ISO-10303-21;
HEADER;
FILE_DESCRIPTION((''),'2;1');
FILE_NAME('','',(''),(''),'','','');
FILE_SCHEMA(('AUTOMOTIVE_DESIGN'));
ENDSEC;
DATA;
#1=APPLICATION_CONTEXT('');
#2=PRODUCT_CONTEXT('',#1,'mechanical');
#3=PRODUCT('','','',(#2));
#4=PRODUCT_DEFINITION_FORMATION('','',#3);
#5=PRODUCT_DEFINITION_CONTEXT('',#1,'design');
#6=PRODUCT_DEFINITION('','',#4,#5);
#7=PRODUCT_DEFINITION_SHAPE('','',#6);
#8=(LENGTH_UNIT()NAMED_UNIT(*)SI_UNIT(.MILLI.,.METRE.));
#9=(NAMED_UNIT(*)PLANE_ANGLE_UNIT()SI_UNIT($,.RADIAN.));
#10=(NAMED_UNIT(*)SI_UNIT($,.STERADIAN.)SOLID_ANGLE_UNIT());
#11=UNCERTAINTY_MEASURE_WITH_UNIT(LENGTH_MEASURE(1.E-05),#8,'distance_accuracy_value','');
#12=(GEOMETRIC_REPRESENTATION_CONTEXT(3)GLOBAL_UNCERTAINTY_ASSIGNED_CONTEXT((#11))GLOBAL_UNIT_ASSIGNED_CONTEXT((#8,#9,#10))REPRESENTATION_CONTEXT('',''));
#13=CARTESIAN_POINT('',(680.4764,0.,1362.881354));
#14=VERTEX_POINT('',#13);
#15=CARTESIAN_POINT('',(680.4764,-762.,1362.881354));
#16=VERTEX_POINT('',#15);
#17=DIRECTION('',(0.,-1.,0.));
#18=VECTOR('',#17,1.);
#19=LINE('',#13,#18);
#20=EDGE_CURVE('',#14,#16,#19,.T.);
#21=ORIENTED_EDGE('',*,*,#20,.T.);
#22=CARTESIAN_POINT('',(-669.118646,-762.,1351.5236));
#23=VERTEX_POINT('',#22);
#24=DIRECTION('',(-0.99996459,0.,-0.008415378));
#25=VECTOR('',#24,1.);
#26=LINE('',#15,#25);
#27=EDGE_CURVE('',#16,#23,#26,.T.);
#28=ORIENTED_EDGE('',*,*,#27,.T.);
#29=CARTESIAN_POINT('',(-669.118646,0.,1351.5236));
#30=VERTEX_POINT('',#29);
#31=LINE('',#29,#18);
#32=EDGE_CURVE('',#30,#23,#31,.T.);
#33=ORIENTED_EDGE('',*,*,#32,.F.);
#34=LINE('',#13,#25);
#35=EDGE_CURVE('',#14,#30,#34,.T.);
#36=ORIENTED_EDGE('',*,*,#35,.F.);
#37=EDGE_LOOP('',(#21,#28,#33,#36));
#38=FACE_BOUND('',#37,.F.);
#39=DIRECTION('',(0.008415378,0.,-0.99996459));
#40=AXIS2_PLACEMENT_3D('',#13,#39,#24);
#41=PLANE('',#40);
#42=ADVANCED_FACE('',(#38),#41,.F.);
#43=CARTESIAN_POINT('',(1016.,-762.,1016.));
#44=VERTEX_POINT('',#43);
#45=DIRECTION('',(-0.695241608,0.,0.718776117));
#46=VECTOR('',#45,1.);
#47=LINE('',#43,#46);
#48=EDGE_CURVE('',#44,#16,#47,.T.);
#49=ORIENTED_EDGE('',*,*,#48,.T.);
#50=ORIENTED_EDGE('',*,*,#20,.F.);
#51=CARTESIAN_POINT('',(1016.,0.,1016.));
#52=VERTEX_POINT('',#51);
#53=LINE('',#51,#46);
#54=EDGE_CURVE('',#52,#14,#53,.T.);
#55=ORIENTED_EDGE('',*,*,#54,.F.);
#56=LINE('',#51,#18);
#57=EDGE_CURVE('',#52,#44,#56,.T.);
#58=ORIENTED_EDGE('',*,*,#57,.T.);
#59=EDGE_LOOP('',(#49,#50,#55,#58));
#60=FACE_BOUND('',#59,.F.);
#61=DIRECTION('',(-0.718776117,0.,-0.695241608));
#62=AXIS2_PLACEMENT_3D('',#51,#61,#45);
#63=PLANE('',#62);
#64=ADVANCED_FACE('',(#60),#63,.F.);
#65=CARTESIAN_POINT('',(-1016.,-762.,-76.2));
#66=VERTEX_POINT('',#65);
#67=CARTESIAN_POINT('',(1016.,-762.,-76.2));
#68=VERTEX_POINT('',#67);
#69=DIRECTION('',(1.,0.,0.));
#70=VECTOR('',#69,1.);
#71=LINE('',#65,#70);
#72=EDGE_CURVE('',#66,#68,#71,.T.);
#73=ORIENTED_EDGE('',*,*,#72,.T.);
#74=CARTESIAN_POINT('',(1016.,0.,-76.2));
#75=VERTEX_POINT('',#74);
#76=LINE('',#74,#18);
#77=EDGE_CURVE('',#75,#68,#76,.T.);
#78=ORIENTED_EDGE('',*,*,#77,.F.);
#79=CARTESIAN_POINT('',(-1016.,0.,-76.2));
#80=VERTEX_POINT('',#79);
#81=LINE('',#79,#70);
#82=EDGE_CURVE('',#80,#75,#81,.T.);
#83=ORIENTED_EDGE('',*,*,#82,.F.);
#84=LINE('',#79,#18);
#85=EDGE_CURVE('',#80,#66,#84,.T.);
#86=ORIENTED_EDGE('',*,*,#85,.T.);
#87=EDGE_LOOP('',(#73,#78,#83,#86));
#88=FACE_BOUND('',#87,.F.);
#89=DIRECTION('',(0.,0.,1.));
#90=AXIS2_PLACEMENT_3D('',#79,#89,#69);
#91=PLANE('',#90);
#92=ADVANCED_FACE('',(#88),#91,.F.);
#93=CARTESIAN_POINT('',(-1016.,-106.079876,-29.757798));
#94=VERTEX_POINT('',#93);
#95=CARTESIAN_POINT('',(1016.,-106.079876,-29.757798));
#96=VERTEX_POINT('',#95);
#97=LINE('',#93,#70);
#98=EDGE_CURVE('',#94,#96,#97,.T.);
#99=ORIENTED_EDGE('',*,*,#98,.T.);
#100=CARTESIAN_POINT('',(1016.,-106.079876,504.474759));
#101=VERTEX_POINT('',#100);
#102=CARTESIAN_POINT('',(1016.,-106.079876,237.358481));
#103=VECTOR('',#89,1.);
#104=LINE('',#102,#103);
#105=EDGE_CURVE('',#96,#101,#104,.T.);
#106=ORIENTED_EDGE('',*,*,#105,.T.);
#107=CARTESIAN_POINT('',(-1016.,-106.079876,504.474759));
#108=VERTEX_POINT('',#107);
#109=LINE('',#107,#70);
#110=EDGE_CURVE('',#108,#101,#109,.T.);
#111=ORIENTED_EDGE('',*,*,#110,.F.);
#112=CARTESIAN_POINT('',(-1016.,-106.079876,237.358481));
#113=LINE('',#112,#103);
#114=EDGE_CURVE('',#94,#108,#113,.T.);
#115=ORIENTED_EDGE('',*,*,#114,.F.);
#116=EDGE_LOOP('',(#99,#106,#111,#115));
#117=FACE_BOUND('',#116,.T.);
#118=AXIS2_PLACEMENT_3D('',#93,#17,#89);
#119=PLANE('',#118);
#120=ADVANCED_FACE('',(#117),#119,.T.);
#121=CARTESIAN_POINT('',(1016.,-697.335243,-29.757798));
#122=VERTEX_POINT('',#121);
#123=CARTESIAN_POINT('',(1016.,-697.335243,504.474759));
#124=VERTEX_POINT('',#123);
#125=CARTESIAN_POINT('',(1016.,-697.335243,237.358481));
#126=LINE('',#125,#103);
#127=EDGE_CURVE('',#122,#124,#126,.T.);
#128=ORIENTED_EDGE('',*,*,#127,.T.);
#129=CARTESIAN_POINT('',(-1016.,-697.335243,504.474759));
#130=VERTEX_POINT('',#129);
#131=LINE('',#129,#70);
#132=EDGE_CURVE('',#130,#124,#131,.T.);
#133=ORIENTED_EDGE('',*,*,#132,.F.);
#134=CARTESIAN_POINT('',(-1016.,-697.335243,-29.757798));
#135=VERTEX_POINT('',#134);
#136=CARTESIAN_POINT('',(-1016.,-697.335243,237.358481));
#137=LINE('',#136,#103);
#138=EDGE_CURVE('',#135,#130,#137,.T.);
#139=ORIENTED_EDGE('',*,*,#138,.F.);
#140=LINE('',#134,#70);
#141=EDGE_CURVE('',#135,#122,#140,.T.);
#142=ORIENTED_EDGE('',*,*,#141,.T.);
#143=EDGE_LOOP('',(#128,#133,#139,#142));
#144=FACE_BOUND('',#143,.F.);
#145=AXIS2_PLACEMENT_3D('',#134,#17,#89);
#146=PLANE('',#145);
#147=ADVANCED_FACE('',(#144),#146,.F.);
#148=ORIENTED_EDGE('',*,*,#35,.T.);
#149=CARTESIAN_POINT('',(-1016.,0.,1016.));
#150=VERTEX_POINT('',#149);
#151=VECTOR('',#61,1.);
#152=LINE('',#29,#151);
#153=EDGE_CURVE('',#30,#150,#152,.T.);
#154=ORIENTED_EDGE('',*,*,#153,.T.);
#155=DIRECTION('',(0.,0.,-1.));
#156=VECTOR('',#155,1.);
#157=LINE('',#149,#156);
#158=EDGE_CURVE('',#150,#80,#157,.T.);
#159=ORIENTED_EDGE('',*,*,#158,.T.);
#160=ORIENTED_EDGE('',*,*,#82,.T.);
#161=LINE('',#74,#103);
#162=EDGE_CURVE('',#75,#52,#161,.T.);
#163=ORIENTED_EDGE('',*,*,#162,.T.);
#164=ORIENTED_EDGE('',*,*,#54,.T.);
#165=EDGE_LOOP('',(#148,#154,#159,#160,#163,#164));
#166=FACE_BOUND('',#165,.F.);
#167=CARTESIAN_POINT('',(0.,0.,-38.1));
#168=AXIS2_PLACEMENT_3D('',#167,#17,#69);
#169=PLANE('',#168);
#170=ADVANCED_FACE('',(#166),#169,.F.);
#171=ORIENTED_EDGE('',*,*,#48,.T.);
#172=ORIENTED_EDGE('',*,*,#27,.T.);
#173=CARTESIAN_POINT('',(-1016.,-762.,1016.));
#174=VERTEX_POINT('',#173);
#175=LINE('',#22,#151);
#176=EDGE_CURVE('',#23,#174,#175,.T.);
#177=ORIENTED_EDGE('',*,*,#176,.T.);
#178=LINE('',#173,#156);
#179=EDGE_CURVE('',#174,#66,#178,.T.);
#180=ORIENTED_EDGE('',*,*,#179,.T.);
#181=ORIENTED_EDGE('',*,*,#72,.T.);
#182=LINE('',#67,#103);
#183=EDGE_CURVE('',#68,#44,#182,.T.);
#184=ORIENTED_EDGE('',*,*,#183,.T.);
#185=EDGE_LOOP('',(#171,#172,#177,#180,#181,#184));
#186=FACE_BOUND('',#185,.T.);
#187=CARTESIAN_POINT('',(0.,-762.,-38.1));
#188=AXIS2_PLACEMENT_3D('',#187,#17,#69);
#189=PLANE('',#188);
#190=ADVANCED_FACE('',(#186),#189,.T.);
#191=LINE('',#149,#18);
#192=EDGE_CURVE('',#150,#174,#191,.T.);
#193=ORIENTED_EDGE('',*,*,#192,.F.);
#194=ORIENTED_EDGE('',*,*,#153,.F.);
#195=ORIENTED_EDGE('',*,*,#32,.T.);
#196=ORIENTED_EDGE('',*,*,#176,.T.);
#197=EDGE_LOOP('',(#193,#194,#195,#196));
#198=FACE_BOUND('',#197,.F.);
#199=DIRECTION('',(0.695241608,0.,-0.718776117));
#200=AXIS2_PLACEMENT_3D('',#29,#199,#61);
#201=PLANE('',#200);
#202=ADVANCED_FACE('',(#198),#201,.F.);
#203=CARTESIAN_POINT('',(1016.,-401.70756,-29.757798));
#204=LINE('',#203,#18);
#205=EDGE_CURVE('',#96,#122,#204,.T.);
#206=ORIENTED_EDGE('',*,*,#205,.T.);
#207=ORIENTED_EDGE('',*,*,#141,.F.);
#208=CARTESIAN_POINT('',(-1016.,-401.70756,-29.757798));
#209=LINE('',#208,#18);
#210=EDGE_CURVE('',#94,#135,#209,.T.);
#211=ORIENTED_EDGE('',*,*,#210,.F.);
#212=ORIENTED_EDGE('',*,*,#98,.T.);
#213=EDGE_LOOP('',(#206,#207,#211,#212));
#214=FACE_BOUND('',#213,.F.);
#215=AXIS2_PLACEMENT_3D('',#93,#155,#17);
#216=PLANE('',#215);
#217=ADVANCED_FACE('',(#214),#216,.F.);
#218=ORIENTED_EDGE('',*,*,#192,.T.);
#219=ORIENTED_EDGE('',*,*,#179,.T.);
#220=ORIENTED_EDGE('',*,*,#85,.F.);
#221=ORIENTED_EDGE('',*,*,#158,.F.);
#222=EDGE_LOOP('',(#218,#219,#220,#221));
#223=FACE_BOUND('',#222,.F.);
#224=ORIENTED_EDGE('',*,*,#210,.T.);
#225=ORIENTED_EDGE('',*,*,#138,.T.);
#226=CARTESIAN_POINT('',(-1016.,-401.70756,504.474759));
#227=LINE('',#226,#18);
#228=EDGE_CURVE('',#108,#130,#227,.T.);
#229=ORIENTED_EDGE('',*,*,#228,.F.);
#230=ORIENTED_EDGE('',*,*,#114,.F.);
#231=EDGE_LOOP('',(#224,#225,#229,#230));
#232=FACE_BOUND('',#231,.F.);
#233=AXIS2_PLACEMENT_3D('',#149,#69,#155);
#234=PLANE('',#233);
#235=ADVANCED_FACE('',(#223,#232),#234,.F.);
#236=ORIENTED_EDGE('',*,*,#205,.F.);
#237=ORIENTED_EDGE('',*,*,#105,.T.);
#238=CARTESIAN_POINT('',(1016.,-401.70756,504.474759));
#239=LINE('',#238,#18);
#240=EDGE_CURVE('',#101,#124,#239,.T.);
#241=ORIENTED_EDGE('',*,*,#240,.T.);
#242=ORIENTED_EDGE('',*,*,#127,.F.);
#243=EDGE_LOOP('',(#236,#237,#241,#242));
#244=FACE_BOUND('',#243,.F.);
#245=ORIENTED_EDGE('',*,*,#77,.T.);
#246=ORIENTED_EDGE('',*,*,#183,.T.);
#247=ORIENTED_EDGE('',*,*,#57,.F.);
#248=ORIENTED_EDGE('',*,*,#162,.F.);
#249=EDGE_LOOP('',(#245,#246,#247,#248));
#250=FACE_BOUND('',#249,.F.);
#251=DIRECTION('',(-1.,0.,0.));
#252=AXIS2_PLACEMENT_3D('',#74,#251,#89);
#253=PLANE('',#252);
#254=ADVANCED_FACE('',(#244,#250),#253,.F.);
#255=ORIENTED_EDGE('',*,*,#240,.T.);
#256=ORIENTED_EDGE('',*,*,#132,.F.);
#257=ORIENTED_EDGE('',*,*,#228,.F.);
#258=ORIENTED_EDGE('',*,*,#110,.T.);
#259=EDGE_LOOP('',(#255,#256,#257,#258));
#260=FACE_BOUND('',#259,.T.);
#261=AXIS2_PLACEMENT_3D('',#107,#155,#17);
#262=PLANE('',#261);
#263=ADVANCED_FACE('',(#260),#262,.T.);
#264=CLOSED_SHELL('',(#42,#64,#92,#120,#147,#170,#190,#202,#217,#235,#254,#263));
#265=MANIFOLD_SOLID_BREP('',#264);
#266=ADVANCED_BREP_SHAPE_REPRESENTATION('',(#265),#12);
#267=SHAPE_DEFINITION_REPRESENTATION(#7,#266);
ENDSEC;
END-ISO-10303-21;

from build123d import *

# Parameters (mm, degrees)
F0_W     = 2032
F0_H     = 508
F1_DEPTH = 762
F2_W     = 591.2553668022
F2_H     = 534.2325568199
F3_DEPTH = 2032


with BuildPart() as f1:
    # F0 (on Front) → F1 (new body)
    with BuildSketch(Plane.XZ):
        Polygon((1016, 0), (0, 0), (-1016, 0), (-1016, -76.2), (1016, -76.2), align=None)
        Polygon((-1016, 0), (0, 0), (1016, 0), (1016, 508), (-1016, 508), align=None)
        with Locations((0, 762)):
            Rectangle(F0_W, F0_H)
        Polygon((-669.1186458851, 1351.5236000156), (-1016, 1016), (1016, 1016), (680.4763999844, 1362.8813541149), align=None)
    extrude(amount=F1_DEPTH)

    # F2 (on face) → F3 (cut)
    with BuildSketch(Plane(origin=(-1016, 0, 0), x_dir=(0, -1, 0), z_dir=(-1, 0, 0))):
        with Locations((401.707559824, 237.3584806919)):
            Rectangle(F2_W, F2_H)
    extrude(amount=-F3_DEPTH, mode=Mode.SUBTRACT)


solid = f1.part
